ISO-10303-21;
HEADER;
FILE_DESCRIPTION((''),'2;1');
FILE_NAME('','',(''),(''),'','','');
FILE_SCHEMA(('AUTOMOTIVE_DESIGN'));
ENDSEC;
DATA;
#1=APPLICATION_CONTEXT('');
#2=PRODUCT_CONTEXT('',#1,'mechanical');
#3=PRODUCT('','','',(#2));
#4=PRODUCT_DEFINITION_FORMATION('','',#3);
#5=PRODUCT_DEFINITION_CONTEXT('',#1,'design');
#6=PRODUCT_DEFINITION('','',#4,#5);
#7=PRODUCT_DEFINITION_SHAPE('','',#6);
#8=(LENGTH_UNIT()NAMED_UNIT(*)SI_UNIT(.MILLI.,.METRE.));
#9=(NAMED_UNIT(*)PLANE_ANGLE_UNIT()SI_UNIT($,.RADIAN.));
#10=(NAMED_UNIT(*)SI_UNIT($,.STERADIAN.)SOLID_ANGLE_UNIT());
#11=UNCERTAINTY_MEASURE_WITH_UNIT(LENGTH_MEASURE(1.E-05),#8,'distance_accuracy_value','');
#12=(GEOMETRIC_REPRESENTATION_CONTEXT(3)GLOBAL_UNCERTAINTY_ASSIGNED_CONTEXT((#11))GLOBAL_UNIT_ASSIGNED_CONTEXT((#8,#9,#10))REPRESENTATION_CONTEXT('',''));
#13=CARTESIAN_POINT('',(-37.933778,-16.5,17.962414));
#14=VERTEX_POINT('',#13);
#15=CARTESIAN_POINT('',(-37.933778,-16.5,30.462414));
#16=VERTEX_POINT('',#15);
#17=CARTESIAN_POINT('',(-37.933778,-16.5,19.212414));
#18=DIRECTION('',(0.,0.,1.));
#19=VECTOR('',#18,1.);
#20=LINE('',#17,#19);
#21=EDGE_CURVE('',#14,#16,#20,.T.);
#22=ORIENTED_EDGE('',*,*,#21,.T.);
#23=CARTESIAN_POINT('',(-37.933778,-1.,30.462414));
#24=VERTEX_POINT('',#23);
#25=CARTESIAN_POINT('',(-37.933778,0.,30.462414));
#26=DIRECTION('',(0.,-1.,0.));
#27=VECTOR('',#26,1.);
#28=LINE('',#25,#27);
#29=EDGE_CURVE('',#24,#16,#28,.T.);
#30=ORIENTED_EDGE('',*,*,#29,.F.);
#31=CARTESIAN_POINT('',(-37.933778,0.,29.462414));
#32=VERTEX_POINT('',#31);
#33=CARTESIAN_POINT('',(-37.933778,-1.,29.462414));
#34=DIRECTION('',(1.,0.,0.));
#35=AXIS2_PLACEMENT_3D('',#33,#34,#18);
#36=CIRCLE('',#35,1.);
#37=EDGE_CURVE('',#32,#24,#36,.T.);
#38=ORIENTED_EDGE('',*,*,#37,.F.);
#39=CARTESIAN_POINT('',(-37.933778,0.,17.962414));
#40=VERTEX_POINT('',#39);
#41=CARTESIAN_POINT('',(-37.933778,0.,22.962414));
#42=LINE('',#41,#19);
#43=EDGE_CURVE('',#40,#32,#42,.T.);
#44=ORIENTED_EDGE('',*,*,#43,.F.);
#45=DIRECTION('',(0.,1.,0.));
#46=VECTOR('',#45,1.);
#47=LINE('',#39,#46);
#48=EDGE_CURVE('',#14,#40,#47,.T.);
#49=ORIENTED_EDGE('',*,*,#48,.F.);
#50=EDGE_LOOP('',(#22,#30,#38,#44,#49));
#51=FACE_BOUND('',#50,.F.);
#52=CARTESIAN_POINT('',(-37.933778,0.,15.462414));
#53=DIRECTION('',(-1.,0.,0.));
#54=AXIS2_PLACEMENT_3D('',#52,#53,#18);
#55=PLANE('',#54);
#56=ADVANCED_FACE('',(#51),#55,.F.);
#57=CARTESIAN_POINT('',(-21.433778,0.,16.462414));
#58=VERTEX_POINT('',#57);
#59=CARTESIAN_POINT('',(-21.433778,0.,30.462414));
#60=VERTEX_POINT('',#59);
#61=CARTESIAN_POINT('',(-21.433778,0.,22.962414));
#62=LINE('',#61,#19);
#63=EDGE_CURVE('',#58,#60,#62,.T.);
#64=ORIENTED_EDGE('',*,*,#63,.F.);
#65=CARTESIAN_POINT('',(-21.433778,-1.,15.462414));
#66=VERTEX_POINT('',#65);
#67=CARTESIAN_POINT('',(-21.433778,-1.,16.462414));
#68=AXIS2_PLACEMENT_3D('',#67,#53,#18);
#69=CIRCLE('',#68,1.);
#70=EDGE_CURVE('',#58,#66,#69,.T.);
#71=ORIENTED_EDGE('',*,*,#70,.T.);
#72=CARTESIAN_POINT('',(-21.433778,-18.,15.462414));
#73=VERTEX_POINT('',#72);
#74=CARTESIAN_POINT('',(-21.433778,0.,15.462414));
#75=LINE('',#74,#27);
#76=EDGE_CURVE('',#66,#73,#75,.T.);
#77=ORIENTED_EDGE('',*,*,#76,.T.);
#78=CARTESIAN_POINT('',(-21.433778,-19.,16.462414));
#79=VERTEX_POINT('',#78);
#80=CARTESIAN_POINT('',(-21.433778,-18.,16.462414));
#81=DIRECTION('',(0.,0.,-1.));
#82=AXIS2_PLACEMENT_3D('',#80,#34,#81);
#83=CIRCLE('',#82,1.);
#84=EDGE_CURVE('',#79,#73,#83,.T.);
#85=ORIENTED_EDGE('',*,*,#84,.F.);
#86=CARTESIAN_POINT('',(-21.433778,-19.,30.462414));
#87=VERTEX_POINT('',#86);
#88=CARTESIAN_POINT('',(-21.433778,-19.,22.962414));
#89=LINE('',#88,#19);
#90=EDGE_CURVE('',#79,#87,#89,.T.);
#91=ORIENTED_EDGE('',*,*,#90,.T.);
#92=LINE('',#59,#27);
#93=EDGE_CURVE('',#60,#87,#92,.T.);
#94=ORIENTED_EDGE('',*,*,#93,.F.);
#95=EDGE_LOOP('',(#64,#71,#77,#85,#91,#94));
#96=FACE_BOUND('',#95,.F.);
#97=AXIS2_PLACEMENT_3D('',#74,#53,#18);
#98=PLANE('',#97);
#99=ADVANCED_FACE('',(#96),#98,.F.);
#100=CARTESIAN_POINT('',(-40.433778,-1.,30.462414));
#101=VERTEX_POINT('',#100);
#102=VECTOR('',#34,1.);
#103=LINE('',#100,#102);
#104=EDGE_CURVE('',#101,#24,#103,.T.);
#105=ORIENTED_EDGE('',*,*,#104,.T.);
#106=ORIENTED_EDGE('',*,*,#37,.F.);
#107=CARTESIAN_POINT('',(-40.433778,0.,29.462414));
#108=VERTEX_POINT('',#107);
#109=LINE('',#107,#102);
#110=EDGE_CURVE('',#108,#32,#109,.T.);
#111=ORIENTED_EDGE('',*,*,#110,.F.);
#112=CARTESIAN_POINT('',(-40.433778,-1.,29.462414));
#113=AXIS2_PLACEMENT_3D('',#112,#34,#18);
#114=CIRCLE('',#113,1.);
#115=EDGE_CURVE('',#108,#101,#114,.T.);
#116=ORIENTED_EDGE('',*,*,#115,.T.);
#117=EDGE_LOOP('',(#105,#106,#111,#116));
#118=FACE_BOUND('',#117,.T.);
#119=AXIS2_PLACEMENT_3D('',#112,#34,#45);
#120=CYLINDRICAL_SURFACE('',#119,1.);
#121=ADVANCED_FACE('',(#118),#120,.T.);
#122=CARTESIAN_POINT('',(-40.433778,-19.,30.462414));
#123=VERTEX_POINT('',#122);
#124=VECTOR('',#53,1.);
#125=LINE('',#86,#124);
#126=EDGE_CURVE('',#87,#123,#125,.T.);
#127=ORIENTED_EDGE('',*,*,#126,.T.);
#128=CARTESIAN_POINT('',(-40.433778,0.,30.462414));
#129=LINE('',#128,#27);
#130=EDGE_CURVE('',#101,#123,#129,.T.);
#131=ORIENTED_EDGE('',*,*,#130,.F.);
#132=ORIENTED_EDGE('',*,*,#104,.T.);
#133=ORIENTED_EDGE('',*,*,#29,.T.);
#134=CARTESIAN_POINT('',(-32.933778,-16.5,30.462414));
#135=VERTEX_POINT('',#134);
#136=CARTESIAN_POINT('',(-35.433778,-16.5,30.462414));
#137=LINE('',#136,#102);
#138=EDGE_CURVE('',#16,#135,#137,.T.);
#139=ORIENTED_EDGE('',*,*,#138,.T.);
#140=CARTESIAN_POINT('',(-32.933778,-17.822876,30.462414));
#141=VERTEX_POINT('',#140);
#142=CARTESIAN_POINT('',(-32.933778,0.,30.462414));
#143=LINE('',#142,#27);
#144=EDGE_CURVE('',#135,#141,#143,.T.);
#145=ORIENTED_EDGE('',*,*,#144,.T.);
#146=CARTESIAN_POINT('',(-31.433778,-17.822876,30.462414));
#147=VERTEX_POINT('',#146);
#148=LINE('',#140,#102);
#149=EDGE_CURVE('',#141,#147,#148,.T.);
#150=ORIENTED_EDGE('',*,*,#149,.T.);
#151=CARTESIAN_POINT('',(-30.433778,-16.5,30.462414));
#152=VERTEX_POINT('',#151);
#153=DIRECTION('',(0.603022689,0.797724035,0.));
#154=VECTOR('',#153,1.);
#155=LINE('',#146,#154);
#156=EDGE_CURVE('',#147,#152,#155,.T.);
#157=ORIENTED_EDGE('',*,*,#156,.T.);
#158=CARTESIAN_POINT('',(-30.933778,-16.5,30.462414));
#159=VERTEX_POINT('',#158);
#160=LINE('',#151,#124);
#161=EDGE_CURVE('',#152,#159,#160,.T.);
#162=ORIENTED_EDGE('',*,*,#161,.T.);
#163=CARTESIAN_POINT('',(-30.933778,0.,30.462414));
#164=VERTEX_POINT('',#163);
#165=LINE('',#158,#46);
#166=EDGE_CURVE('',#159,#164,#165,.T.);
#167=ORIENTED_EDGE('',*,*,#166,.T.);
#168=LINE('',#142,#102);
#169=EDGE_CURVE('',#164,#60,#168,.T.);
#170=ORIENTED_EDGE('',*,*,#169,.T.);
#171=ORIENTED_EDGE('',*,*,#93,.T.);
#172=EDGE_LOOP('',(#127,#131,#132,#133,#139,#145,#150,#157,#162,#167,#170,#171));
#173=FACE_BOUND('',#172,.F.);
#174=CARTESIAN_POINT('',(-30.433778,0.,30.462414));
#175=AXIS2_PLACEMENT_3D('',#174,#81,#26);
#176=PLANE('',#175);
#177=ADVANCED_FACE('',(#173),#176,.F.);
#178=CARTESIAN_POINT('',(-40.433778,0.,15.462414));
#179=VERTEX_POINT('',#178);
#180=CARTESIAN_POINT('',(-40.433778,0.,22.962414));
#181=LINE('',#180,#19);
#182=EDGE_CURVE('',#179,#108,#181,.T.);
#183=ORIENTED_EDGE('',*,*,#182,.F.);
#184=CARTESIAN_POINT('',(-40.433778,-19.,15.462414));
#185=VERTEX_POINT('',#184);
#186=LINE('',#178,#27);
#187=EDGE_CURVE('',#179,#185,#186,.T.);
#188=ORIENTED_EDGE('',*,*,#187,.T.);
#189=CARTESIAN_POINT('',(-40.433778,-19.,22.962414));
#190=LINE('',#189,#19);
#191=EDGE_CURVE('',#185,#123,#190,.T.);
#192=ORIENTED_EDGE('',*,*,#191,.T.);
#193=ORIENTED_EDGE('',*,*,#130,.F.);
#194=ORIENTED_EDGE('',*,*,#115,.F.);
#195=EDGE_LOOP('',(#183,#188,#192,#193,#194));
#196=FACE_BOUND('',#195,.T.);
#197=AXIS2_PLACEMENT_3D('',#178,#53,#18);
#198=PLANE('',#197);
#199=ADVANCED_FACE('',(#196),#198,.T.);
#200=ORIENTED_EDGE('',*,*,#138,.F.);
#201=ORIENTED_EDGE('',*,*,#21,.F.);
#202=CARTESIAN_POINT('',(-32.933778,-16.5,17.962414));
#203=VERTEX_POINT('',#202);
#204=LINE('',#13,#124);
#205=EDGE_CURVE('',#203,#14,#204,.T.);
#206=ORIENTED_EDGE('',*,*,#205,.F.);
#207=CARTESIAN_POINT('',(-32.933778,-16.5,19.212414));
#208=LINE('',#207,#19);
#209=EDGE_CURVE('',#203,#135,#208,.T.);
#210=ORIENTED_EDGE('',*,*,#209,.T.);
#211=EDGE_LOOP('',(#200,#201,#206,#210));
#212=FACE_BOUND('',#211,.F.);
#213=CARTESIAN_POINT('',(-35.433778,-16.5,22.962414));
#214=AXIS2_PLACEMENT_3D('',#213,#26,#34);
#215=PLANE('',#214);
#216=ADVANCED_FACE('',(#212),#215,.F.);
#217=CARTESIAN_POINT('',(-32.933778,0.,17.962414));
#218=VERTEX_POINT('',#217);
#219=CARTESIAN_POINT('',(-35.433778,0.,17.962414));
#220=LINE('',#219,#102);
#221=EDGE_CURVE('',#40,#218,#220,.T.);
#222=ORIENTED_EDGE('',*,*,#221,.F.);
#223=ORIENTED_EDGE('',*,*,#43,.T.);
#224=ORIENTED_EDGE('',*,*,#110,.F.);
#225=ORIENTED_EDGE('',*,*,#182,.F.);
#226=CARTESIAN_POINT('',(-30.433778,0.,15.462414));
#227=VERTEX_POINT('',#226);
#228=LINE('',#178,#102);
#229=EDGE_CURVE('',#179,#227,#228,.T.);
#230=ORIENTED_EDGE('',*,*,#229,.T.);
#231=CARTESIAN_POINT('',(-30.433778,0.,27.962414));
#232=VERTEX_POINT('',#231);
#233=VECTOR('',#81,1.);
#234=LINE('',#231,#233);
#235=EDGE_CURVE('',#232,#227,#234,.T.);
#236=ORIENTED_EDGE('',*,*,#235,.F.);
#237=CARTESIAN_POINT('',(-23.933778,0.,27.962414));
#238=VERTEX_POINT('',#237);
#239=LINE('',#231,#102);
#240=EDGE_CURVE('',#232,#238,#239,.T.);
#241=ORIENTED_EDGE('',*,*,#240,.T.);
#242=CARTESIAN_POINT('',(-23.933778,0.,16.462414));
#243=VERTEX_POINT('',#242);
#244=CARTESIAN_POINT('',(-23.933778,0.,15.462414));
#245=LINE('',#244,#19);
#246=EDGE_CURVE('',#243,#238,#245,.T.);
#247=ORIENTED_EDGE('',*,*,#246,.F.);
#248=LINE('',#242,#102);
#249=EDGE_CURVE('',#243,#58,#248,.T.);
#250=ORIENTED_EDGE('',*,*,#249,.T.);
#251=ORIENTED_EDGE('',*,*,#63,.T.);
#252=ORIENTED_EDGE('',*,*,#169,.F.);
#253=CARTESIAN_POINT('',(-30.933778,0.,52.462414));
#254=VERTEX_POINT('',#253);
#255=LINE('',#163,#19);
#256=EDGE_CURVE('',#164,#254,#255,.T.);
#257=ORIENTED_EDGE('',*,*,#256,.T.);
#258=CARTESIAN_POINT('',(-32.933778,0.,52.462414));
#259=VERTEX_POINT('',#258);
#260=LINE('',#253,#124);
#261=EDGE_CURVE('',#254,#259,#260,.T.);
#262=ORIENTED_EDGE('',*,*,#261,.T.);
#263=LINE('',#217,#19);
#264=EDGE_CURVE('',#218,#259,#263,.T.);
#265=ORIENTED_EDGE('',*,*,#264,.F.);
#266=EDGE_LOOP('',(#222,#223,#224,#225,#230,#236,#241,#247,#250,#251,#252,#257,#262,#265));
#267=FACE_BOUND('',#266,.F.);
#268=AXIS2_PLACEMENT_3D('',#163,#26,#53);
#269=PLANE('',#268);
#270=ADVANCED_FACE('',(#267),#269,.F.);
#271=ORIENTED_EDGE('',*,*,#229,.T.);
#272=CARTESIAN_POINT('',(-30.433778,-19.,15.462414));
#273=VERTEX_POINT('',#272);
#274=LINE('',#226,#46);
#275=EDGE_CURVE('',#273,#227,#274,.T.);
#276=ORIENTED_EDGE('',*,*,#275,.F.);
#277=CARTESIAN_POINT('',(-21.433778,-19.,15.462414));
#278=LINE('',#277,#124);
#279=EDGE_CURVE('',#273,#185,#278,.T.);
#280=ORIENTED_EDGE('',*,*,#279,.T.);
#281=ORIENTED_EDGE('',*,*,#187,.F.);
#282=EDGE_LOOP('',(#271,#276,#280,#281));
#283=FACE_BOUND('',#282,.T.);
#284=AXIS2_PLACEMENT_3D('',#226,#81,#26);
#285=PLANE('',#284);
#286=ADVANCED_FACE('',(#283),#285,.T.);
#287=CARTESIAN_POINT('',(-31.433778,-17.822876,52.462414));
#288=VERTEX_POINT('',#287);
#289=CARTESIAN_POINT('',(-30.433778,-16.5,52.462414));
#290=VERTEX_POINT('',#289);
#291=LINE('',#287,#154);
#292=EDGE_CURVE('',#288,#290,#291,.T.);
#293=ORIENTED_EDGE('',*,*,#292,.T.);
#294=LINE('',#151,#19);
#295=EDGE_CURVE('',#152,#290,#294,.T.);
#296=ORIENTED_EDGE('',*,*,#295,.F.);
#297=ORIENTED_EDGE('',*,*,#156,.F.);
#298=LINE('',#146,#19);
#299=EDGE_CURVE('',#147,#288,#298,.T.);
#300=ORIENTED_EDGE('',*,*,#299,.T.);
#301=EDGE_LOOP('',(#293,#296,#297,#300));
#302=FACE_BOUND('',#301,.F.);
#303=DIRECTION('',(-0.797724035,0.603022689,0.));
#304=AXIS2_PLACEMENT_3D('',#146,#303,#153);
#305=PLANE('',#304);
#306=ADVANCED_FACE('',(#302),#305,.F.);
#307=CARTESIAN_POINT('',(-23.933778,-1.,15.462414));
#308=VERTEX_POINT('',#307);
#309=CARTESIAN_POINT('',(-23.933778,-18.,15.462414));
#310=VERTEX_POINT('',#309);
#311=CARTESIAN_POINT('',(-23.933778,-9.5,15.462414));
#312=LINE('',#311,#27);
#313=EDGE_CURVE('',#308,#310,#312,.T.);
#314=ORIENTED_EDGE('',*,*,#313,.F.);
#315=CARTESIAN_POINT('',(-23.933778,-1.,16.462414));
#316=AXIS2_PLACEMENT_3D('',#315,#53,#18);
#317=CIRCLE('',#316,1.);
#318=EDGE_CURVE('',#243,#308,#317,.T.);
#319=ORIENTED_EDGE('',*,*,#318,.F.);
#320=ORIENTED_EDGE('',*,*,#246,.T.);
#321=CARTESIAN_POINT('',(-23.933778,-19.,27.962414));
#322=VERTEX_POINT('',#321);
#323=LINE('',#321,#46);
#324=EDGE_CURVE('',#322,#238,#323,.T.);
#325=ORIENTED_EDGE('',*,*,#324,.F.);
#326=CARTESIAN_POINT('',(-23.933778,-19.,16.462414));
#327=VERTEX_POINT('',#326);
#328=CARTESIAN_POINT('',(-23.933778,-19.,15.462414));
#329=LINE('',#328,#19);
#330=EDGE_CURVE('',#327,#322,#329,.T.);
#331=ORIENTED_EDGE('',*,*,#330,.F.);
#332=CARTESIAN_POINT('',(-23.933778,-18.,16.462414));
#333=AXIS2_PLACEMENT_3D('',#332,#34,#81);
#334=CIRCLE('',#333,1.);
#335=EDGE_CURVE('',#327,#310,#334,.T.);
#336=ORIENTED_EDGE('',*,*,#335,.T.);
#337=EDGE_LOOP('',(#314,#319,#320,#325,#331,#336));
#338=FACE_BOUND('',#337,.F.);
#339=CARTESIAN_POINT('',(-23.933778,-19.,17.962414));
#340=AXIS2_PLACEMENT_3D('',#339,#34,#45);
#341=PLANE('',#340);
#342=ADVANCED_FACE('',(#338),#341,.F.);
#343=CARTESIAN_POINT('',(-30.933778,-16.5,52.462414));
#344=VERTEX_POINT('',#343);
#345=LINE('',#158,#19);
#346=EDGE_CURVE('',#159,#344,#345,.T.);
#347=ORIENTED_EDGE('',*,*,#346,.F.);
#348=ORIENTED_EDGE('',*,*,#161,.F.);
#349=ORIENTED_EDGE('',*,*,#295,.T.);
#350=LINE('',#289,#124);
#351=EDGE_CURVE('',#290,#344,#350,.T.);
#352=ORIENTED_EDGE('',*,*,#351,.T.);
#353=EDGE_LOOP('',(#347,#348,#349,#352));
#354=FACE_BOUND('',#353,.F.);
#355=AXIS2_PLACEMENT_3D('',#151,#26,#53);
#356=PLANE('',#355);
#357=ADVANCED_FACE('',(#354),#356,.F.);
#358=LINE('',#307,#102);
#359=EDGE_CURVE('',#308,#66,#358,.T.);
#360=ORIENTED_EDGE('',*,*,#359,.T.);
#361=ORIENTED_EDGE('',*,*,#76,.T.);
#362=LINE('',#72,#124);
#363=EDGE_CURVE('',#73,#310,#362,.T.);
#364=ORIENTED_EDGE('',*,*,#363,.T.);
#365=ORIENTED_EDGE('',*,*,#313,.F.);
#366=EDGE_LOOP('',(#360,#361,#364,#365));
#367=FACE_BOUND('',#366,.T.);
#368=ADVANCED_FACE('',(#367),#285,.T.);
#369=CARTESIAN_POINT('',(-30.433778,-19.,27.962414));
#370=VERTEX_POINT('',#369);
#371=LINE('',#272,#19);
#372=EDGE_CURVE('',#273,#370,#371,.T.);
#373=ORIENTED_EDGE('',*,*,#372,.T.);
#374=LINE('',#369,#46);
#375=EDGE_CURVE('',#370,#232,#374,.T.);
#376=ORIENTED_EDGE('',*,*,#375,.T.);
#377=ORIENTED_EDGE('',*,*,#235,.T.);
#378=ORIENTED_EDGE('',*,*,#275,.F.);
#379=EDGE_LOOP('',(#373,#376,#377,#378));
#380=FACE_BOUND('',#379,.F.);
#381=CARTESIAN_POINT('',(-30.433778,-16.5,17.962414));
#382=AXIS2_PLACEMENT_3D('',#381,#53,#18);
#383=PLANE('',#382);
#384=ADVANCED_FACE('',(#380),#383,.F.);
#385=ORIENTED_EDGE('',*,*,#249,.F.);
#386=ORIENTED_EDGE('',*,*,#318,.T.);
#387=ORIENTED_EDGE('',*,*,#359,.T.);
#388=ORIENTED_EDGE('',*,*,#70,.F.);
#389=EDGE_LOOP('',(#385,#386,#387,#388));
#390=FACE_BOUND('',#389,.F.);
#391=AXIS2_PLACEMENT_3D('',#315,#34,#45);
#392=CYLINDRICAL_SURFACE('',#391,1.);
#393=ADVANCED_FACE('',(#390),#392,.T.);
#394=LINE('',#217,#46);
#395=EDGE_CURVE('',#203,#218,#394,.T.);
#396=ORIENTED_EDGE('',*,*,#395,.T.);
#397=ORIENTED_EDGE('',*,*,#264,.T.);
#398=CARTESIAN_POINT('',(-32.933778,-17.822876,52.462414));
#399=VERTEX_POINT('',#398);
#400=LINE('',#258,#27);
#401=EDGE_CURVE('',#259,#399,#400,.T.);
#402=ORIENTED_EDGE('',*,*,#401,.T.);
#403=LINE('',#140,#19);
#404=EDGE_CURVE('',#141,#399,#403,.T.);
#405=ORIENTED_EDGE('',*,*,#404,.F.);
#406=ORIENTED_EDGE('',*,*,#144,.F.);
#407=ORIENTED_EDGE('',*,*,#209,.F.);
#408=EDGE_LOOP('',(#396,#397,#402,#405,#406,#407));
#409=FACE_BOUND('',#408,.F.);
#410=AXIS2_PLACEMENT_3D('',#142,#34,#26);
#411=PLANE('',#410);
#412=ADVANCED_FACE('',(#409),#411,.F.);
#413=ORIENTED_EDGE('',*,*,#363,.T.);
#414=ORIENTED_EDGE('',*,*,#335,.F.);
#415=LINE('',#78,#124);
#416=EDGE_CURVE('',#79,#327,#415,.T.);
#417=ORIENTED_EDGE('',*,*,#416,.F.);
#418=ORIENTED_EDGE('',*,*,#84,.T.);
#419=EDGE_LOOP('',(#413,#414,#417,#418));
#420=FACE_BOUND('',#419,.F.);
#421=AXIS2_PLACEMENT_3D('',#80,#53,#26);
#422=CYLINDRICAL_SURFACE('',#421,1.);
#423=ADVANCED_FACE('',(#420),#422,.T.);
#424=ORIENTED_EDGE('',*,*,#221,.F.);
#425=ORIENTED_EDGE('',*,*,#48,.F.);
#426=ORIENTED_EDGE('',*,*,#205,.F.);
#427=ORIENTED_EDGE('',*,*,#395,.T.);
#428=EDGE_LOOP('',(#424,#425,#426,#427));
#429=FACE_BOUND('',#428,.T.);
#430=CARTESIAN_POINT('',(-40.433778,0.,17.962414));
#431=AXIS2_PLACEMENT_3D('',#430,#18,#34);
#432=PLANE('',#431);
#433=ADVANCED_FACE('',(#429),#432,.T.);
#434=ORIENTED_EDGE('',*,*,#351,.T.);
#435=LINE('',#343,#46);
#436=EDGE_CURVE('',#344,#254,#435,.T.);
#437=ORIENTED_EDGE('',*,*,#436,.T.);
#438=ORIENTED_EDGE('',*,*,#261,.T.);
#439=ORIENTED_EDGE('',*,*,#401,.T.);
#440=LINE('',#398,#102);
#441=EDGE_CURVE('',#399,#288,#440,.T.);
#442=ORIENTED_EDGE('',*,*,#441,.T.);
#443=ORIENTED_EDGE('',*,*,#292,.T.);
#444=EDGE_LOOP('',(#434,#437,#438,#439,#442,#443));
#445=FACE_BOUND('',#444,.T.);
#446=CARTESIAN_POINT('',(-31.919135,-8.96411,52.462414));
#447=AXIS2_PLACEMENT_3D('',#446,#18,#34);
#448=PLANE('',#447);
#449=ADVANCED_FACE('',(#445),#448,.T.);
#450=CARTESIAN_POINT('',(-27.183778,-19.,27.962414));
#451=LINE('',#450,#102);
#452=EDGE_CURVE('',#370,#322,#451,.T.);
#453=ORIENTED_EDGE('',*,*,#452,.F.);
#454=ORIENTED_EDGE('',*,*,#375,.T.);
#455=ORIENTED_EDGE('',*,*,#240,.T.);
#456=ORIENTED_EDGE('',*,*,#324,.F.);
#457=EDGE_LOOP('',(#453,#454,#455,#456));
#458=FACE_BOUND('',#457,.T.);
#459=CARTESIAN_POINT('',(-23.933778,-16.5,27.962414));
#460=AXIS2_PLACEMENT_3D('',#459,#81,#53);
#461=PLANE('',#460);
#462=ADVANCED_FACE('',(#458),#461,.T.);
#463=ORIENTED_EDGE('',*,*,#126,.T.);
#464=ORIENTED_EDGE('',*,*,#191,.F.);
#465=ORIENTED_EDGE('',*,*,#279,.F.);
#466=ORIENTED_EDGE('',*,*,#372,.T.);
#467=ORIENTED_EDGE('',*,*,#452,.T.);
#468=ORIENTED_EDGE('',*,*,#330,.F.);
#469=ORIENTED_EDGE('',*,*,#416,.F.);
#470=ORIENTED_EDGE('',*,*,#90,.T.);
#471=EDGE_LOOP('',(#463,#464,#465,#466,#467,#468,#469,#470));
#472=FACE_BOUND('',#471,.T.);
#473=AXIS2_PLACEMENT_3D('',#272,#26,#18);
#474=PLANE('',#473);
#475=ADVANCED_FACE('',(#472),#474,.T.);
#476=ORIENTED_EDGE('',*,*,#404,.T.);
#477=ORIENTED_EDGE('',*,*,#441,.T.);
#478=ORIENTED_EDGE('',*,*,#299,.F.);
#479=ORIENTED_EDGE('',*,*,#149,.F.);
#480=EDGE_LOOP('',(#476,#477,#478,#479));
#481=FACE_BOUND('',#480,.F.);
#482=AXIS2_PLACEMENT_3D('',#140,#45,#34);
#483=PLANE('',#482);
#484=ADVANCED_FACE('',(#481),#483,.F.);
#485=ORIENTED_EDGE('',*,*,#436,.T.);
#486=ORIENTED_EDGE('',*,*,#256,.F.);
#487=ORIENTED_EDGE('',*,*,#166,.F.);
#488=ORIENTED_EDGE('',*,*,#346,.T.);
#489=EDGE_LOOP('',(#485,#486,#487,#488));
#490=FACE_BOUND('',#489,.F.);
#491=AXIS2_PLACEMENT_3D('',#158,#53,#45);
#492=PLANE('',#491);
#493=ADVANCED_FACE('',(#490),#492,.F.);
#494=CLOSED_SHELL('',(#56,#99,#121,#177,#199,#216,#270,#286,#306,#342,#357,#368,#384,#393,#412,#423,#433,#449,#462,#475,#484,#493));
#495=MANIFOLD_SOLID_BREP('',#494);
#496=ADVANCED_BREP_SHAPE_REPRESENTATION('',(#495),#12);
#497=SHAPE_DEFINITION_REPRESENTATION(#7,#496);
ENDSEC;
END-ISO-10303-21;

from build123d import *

# Parameters (mm, degrees)
F0_W     = 10
F0_H     = 15
F1_DEPTH = 19
F2_T     = -2.5
F3_DEPTH = 9
F4_T     = -2.5
F5_DEPTH = 25
F6_DEPTH = 25
F8_DEPTH = 22
F9_R     = 1


# Not quite as in the source:
# - two fillets or chamfers of one size are made in one step


with BuildPart() as f1:
    # F0 (on Front) → F1 (new body)
    with BuildSketch(Plane.XZ):
        with Locations((-35.433777729, 22.9624143615)):
            Rectangle(F0_W, F0_H)
    extrude(amount=F1_DEPTH)

    # F2
    f2_openings = [f1.faces().sort_by_distance(p)[0] for p in [
        (-35.433778, 0, 22.962414),
        (-35.433778, -9.5, 30.462414),
    ]]
    offset(amount=F2_T, openings=f2_openings)

    # F3 (add): a face of the model
    f3_faces = [f1.faces().sort_by_distance(p)[0] for p in [
        (-30.433777729, -9.5, 22.9624143615),
    ]]
    extrude(f3_faces, amount=F3_DEPTH)

    # F4: a shell. OpenCascade refuses it in one call, so the cavity is built on its own and cut out:
    # the body offset inwards by the wall thickness, plus a prism from it out through each open face.
    f4_core = offset(f1.part, amount=F4_T, kind=Kind.INTERSECTION, mode=Mode.PRIVATE)
    f4_exits = [f4_core.faces().sort_by_distance(p)[0] for p in [
        (-27.183778, -2.5, 22.962414),
    ]]
    add(f4_core, mode=Mode.SUBTRACT)
    extrude(f4_exits, amount=-F4_T, mode=Mode.SUBTRACT)

    # F5 (cut): a face of the model
    f5_faces = [f1.faces().sort_by_distance(p)[0] for p in [
        (-27.183777729, -16.5, 22.9624143615),
    ]]
    extrude(f5_faces, amount=-F5_DEPTH, mode=Mode.SUBTRACT)

    # F6 (cut): a face of the model
    f6_faces = [f1.faces().sort_by_distance(p)[0] for p in [
        (-27.183777729, -9.5, 17.9624143615),
    ]]
    extrude(f6_faces, amount=-F6_DEPTH, mode=Mode.SUBTRACT)

    # F7 (on face) → F8 (join)
    with BuildSketch(Plane.XY.offset(30.4624143615)):
        Polygon((-30.933777729, 0), (-32.933777729, 0), (-32.933777729, -17.8228756555), (-31.933777729, -17.8228756555), (-31.433777729, -17.8228756555), (-30.433777729, -16.5), (-30.933777729, -16.5), align=None)
    extrude(amount=F8_DEPTH)

    # F9
    f9_edges = [f1.edges().sort_by_distance(p)[0] for p in [
        (-22.683778, 0, 15.462414),
        (-22.683778, -19, 15.462414),
        (-39.183778, 0, 30.462414),
    ]]
    fillet(f9_edges, radius=F9_R)


solid = f1.part
